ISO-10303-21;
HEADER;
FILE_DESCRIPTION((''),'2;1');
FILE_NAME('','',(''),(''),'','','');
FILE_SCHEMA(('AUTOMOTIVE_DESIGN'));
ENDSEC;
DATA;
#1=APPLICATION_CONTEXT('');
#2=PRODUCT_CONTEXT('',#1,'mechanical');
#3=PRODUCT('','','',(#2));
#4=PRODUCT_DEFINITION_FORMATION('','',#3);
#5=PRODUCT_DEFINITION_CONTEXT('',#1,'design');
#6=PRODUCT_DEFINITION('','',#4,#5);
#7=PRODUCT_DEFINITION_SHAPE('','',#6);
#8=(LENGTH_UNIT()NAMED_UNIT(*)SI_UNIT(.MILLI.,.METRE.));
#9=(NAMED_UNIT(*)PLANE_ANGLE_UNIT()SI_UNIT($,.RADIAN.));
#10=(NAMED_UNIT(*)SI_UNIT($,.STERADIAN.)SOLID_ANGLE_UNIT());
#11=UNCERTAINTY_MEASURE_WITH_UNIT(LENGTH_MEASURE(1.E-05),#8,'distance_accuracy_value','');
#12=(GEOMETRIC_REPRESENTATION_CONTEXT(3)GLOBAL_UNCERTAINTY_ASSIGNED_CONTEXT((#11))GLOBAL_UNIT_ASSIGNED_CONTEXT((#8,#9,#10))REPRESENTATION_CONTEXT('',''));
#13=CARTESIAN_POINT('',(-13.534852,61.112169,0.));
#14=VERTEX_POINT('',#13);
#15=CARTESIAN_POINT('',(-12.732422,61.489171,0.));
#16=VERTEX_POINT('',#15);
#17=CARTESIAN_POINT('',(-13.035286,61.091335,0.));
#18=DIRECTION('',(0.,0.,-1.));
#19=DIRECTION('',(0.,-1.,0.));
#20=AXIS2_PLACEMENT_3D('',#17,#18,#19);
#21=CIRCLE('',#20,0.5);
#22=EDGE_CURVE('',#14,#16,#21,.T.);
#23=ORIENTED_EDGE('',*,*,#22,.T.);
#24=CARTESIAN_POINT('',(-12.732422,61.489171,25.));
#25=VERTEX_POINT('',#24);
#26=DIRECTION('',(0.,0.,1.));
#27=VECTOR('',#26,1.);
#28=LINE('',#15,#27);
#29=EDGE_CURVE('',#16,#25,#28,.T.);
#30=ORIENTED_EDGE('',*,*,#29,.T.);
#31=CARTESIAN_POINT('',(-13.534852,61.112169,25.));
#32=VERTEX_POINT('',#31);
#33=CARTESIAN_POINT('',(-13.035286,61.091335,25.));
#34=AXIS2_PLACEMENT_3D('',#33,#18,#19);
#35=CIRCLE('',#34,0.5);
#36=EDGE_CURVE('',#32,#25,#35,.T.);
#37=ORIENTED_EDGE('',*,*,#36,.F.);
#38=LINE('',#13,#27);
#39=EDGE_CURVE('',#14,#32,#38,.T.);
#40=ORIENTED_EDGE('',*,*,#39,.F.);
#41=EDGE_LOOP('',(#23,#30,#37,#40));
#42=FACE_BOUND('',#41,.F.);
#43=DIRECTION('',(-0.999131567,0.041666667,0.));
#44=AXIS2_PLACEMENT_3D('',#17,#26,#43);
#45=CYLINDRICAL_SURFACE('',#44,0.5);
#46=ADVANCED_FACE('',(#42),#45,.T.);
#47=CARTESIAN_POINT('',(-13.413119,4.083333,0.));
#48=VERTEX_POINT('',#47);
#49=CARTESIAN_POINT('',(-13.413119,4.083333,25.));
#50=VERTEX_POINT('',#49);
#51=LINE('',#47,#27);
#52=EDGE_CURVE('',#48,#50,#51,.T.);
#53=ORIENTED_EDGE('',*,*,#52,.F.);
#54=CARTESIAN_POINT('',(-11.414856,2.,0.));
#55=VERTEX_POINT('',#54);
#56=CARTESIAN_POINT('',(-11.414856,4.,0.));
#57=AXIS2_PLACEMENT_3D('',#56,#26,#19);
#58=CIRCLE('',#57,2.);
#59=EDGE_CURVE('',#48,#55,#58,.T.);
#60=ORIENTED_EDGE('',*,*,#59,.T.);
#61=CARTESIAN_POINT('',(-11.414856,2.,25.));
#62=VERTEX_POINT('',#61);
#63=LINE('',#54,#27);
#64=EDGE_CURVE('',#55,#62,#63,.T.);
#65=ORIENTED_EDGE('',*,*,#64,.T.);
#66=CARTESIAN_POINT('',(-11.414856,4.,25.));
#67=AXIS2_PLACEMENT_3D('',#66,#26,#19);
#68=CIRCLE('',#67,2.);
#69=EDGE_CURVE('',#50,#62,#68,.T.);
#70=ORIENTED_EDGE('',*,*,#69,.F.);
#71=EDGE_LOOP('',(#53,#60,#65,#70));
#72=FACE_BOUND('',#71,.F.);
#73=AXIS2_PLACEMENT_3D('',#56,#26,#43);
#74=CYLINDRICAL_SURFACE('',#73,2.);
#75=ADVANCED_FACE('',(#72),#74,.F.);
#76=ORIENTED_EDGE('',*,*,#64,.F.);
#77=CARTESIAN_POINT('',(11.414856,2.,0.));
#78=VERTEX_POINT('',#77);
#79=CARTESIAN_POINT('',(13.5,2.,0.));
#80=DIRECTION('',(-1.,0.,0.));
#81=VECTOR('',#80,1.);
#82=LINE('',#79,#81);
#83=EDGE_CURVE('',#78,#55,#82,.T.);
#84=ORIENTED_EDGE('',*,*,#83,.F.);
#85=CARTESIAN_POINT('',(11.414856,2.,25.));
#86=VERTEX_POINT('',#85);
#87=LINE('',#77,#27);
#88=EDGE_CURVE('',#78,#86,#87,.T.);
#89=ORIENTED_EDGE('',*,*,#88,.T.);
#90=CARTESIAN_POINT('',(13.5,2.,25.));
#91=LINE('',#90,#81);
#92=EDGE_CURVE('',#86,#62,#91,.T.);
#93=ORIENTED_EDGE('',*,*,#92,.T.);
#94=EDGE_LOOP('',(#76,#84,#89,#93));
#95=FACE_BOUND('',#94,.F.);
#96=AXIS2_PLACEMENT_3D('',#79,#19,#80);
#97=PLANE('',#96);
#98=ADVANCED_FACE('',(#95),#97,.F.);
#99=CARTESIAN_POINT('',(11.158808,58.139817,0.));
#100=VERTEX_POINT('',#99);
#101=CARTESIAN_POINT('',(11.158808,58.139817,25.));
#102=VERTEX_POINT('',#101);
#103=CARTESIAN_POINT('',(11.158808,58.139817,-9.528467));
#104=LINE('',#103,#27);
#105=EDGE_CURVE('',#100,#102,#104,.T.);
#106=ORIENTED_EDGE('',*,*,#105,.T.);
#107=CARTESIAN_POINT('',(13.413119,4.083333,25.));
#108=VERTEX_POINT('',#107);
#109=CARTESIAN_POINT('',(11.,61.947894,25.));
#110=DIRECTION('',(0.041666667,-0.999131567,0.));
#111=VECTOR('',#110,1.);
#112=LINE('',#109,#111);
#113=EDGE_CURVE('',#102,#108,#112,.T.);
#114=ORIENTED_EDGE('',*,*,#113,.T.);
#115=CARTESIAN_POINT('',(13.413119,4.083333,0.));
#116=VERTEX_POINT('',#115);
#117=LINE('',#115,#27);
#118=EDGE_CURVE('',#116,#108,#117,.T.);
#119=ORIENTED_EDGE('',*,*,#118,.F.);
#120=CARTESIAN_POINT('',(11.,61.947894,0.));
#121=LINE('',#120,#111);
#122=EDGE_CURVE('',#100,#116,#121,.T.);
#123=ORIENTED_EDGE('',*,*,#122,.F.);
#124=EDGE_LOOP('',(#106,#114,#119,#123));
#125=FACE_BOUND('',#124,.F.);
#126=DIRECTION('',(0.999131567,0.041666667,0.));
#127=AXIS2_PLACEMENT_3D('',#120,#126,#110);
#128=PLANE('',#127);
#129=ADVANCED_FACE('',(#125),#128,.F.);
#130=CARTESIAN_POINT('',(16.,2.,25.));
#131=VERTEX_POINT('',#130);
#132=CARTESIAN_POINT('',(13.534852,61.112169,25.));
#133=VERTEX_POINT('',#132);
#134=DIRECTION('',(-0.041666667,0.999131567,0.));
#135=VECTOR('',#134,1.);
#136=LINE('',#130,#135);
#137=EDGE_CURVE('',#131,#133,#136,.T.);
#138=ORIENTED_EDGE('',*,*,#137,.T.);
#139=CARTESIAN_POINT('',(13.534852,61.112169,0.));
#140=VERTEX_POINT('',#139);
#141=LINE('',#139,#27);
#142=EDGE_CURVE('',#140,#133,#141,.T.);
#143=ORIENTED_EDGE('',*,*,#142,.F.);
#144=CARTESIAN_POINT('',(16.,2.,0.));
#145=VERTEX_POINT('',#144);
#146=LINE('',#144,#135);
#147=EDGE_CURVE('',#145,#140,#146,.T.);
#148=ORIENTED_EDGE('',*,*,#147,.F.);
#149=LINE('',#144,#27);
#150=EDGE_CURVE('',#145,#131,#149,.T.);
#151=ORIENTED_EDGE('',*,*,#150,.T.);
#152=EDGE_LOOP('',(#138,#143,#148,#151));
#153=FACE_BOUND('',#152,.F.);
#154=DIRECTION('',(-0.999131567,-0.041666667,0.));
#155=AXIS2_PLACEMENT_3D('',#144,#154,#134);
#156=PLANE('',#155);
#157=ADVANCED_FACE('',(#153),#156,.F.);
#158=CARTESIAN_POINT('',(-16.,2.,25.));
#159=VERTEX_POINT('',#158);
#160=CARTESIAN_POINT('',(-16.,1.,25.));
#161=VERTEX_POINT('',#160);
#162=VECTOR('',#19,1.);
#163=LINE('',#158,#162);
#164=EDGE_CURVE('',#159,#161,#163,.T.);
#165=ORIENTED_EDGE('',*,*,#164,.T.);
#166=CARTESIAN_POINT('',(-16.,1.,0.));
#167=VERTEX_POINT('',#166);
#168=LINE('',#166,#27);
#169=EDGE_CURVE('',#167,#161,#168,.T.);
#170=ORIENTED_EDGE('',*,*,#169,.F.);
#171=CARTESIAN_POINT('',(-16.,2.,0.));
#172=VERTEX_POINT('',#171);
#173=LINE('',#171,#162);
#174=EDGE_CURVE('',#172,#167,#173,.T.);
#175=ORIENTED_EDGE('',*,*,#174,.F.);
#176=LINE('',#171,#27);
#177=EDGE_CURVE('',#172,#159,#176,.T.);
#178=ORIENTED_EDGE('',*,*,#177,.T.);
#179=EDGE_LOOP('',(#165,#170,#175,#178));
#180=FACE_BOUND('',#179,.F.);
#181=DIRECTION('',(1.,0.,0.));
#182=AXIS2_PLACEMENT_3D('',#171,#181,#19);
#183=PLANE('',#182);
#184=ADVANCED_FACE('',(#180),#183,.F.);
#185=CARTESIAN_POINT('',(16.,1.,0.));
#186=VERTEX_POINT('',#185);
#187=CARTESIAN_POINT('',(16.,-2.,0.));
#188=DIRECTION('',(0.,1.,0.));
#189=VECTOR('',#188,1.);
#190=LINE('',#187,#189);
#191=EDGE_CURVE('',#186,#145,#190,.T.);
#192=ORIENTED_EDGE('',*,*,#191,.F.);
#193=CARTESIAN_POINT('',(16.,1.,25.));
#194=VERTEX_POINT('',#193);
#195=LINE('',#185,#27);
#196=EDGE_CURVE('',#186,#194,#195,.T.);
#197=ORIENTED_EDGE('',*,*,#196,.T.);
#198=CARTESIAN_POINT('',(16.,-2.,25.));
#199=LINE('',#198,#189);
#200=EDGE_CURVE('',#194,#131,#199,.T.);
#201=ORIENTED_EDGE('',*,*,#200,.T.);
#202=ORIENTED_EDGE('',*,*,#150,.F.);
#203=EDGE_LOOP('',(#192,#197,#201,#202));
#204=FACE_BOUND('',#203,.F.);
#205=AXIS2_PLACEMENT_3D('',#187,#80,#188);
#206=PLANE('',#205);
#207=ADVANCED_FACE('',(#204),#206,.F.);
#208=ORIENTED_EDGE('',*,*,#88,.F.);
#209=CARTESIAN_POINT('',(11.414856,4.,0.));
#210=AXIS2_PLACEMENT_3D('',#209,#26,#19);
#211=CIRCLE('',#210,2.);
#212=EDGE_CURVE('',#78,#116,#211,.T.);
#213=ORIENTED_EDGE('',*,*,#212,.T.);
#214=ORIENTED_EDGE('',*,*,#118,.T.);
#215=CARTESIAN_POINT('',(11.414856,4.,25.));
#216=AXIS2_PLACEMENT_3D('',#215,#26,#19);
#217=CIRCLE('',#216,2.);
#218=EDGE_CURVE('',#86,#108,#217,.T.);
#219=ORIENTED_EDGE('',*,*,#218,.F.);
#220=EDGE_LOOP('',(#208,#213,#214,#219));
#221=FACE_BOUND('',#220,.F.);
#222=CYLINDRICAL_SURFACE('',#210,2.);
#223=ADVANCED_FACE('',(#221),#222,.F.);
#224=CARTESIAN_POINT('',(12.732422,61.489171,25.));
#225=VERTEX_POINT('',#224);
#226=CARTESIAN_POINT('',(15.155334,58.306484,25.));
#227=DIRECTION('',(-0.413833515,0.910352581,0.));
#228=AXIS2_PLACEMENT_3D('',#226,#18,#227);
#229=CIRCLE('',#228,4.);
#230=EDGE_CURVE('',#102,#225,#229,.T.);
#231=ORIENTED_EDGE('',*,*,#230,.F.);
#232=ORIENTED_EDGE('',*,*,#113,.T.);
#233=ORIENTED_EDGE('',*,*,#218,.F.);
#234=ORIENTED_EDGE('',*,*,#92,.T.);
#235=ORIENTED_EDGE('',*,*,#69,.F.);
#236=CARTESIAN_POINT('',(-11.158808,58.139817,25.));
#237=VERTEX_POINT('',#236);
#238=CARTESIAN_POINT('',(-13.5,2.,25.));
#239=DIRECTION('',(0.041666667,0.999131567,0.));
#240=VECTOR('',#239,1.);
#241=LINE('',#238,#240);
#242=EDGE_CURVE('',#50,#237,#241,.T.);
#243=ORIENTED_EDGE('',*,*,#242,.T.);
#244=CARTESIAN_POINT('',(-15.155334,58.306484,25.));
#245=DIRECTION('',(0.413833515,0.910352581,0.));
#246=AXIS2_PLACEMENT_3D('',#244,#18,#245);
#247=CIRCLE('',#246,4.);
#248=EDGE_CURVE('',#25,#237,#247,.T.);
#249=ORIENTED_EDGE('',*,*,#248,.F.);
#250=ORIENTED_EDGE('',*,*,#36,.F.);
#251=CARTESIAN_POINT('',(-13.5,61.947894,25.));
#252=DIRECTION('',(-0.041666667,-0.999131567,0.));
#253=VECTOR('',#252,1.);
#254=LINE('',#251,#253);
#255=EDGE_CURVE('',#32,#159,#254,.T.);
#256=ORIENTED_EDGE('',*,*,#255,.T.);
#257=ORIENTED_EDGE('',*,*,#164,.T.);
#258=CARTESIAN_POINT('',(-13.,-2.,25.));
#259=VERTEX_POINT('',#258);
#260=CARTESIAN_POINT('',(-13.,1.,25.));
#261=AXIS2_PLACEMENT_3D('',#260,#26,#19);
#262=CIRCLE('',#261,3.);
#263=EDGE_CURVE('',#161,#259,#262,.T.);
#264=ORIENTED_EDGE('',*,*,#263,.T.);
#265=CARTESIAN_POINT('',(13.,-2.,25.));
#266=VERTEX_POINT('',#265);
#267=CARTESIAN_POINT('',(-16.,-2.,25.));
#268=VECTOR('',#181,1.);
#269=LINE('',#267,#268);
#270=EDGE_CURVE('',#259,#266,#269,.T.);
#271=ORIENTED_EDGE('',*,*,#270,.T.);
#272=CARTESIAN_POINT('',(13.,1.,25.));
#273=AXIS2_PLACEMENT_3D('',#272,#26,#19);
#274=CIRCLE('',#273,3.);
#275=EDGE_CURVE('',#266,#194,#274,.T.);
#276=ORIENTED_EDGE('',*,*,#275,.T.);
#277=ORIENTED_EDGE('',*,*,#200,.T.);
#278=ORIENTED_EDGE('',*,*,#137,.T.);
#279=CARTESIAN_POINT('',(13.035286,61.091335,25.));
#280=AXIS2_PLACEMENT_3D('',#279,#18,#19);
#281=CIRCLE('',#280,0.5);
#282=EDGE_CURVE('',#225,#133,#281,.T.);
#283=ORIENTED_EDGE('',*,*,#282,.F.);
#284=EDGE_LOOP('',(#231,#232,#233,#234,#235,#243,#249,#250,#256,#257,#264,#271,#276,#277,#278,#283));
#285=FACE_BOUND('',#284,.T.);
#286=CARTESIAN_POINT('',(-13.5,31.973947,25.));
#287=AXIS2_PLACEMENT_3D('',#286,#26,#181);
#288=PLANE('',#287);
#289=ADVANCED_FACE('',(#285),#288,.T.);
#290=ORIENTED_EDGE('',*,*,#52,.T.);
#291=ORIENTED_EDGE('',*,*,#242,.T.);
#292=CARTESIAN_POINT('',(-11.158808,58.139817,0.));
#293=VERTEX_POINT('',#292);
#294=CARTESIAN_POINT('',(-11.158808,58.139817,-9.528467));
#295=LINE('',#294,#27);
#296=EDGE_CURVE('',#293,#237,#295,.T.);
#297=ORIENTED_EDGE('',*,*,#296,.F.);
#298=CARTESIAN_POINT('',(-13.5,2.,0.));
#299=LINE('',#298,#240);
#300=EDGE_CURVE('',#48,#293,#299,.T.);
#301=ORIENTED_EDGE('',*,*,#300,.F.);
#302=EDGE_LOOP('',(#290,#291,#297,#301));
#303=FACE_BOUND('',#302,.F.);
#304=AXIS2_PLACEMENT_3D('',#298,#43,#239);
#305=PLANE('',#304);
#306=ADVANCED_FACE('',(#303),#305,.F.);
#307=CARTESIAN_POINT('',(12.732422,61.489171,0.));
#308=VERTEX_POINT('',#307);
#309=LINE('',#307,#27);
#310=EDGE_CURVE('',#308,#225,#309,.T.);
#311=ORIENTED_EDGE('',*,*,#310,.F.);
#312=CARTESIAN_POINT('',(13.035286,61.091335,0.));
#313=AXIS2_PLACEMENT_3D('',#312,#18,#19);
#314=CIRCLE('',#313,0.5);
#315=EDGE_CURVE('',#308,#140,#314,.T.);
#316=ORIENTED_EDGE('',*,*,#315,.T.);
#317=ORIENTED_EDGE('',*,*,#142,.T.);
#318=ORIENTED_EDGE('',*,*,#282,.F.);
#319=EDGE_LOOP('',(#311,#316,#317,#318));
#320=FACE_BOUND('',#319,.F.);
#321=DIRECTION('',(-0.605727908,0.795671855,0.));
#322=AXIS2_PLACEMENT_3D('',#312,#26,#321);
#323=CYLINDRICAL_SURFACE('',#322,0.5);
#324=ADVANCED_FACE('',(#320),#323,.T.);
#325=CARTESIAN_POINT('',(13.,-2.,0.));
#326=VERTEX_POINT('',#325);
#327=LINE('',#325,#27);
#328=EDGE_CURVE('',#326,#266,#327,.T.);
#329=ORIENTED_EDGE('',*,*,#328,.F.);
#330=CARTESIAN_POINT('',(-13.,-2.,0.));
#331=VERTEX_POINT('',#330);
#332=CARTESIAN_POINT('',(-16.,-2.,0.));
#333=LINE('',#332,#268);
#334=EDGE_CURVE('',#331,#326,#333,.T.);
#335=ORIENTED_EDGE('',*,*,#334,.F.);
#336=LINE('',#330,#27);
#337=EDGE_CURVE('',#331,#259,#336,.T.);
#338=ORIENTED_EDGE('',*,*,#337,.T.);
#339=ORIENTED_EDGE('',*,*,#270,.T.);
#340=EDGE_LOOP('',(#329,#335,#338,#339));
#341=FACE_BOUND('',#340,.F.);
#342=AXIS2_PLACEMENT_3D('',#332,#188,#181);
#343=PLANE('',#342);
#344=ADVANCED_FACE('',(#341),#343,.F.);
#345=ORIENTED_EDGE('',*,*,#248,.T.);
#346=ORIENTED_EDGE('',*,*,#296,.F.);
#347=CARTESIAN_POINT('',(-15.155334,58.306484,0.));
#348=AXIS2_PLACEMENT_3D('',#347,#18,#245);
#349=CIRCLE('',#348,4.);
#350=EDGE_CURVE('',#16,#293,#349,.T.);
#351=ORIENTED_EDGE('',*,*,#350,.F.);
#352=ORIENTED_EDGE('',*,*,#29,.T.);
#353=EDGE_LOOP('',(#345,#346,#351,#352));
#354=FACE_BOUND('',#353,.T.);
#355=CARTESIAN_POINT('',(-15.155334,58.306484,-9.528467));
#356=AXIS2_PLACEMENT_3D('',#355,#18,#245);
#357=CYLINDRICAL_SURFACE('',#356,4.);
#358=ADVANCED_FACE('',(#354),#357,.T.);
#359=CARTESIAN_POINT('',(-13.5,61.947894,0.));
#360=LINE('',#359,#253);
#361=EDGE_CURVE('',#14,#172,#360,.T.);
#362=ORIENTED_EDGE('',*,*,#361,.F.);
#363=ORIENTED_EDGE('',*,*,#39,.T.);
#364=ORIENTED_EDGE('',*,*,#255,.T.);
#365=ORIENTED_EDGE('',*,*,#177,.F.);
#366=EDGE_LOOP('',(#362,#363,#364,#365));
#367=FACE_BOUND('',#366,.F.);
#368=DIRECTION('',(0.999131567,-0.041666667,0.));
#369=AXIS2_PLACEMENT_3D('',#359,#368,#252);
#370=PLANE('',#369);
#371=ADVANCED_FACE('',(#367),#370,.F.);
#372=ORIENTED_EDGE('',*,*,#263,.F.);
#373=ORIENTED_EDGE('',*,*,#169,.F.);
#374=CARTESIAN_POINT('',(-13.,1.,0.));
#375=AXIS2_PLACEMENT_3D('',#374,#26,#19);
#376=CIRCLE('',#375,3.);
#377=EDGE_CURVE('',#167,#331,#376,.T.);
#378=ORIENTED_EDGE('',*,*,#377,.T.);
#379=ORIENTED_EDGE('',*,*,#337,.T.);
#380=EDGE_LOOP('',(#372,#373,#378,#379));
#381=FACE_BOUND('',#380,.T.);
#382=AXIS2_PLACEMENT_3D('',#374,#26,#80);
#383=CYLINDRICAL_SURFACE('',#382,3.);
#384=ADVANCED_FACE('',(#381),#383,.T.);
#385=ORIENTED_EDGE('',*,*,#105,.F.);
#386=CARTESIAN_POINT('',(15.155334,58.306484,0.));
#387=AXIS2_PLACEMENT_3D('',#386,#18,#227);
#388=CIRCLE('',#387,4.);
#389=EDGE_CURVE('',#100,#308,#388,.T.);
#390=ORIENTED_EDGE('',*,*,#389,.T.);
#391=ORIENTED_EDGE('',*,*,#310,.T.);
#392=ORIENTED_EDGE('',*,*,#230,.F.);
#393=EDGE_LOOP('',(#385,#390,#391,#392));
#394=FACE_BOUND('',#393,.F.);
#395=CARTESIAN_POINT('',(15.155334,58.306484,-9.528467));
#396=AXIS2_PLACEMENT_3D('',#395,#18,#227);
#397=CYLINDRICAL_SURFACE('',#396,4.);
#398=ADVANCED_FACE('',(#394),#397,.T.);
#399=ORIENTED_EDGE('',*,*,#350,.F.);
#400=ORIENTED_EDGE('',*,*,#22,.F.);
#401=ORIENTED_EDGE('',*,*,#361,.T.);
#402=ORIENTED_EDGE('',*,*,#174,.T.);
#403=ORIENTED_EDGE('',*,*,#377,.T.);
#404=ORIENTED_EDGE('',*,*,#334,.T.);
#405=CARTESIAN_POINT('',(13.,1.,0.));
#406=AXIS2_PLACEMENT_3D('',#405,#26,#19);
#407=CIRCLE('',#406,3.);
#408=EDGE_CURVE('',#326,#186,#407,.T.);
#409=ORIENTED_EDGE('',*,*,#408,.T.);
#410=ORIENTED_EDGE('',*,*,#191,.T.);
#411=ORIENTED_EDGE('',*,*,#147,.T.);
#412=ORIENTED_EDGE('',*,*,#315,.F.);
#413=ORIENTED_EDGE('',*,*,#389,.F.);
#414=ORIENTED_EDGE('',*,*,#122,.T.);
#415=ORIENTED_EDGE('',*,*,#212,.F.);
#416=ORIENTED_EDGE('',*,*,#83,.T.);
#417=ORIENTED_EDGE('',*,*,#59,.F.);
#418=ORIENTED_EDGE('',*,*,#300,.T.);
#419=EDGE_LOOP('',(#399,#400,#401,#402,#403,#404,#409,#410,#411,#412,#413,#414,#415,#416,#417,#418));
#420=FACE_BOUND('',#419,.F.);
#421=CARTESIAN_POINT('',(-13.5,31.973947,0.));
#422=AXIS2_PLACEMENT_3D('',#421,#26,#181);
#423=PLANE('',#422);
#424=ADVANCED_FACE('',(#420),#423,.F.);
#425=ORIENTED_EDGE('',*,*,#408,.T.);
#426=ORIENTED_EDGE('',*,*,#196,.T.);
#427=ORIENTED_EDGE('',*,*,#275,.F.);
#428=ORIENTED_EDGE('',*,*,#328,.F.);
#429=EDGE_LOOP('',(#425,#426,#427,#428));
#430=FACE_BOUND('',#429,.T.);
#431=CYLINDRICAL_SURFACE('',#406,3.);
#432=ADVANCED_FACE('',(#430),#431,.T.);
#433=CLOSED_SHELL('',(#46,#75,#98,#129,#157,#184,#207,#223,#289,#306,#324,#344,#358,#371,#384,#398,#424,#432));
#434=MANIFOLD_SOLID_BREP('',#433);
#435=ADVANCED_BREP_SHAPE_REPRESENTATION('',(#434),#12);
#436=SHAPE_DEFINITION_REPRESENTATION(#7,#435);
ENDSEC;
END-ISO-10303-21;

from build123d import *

# Parameters (mm, degrees)
F1_DEPTH    = 25
F2_T1_DEPTH = 44.0569346235
F3_R        = 0.5
F4_R        = 3
F5_R        = 2


# Not quite as in the source:
# - a fillet or chamfer that OpenCascade refuses, or shapes differently, is made with other operations: its cross-section is extruded or revolved along the edge and cut away or added


with BuildPart() as f1:
    # F0 (on Top) → F1 (new body)
    with BuildSketch(Plane.XY):
        Polygon((-13.5, 61.9478940414), (-16, 2), (-13.5, 2), (-11, 61.9478940414), align=None)
        Polygon((13.5, 2), (16, 2), (13.5, 61.9478940414), (11, 61.9478940414), align=None)
        Polygon((-16, -2), (16, -2), (16, 2), (13.5, 2), (-13.5, 2), (-16, 2), align=None)
    extrude(amount=F1_DEPTH)

    # F2: fillet of radius 4 on 2 edges, made by hand

    # F2_s2 → F2_t1 (cut)
    with BuildSketch(Plane.XY.offset(-9.5284673118)):
        with BuildLine():
            ThreePointArc((13.5, 61.9478940414), (11.7478065256, 60.4014195424), (11.1588077885, 58.1398170495))
            Line((11.1588077885, 58.1398170495), (11, 61.9478940414))
            Line((11, 61.9478940414), (13.5, 61.9478940414))
        make_face()
        with BuildLine():
            ThreePointArc((-13.5, 61.9478940414), (-11.7478065256, 60.4014195424), (-11.1588077885, 58.1398170495))
            Line((-11.1588077885, 58.1398170495), (-11, 61.9478940414))
            Line((-11, 61.9478940414), (-13.5, 61.9478940414))
        make_face()
    extrude(amount=F2_T1_DEPTH, mode=Mode.SUBTRACT)

    # F3
    f3_edges = [f1.edges().sort_by_distance(p)[0] for p in [
        (-13.5, 61.947894, 12.5),
        (13.5, 61.947894, 12.5),
    ]]
    fillet(f3_edges, radius=F3_R)

    # F4
    f4_edges = [f1.edges().sort_by_distance(p)[0] for p in [
        (16, -2, 12.5),
        (-16, -2, 12.5),
    ]]
    fillet(f4_edges, radius=F4_R)

    # F5
    f5_edges = [f1.edges().sort_by_distance(p)[0] for p in [
        (-13.5, 2, 12.5),
        (13.5, 2, 12.5),
    ]]
    fillet(f5_edges, radius=F5_R)


solid = f1.part
